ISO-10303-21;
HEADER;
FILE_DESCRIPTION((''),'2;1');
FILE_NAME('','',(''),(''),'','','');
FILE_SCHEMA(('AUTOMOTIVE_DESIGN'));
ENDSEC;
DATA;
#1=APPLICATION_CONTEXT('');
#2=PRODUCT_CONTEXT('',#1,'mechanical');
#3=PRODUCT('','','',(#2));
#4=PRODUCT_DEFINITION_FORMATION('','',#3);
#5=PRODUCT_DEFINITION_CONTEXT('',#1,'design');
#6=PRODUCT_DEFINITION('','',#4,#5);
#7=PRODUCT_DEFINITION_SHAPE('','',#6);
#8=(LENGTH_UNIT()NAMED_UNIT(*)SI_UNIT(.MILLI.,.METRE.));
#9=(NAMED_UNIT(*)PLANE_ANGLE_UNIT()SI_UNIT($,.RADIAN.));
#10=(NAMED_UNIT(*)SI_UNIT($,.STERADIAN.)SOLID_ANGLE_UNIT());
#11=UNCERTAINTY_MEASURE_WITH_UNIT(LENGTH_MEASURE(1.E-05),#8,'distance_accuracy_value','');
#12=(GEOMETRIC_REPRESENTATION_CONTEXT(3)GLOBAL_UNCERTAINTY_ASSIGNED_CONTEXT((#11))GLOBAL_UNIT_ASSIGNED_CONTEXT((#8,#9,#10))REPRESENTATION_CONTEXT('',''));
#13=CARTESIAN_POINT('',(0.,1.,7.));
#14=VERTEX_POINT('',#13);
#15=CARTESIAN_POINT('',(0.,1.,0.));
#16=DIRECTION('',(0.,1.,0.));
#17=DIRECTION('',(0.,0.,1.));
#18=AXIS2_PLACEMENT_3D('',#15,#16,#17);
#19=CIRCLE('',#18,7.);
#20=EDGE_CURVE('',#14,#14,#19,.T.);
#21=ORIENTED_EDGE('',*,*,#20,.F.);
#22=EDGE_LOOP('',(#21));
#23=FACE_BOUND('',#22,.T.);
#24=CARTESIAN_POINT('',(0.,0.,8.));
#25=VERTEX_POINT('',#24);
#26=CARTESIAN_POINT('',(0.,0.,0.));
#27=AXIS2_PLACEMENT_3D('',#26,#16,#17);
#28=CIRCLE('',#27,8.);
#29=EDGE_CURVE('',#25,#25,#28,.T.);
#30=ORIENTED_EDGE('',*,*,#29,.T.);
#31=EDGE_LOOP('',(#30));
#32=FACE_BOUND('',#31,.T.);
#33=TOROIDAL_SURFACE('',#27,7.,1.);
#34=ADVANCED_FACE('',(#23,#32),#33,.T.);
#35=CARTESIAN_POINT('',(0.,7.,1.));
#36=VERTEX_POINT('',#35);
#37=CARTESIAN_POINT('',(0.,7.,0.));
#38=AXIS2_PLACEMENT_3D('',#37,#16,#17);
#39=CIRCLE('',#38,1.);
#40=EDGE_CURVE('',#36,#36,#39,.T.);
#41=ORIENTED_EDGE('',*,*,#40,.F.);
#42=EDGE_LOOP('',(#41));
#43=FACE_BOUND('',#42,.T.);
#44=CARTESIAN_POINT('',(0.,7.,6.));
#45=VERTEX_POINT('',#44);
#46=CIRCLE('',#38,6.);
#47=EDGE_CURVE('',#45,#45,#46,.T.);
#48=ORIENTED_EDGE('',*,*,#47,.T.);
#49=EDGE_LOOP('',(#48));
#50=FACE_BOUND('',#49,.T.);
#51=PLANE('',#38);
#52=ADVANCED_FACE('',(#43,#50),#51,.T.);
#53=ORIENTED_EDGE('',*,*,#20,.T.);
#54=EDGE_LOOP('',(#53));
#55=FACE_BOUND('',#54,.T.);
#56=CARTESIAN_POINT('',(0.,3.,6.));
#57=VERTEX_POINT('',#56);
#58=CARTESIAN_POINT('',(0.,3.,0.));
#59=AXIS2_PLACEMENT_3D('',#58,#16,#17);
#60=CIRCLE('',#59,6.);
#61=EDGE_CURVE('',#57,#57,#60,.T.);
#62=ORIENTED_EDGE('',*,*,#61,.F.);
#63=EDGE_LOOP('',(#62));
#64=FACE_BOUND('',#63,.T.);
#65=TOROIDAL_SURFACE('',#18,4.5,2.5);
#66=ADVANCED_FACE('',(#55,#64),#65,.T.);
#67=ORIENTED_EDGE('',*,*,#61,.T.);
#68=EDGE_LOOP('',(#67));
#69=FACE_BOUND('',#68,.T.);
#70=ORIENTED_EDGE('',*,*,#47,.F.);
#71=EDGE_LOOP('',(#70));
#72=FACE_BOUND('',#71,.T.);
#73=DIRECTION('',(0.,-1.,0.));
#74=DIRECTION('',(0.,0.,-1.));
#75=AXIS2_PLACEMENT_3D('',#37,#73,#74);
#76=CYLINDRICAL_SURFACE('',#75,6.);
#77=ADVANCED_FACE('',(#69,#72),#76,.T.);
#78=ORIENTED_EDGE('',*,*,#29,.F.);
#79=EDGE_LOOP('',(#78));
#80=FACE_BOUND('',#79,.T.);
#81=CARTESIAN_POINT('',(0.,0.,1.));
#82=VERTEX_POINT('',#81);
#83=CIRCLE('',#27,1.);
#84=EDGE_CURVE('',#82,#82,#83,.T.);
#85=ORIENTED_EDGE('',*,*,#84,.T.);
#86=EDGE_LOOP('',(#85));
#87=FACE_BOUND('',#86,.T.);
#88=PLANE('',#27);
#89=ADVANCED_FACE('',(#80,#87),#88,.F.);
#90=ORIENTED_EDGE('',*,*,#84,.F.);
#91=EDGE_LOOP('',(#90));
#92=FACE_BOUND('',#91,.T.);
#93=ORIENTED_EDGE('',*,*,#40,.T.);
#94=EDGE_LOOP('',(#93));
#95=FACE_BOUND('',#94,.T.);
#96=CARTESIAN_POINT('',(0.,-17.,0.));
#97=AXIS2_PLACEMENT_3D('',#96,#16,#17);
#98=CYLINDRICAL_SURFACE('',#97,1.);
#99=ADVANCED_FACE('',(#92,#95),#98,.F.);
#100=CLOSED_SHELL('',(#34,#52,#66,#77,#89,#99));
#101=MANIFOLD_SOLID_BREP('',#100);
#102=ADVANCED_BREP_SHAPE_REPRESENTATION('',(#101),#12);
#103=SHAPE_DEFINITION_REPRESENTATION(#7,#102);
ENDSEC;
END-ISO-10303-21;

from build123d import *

# Parameters (mm, degrees)
SKETCH1_R                         = 8
BLADE_HOLDER_EXTRUDE_DEPTH        = 1
SKETCH2_R                         = 7
BLADE_HOLDER_EXTRUDE_2_DEPTH      = 2
SKETCH3_R                         = 6
BLADE_HOLDER_EXTRUDE_3_DEPTH      = 4
SKETCH4_R                         = 1
HOLE_FOR_SCREW_BLADE_HOLDER_DEPTH = 24
BLADE_HOLDER_FILLET_1_R           = 1
BLADE_HOLDER_FILLET_2_R           = 2.5


# Some blends are built 0.0001 mm under size
with BuildPart() as part:
    # Sketch1 → Blade Holder Extrude (new body)
    with BuildSketch(Plane(origin=(0, 0, 0), x_dir=(1, 0, 0), z_dir=(0, 1, 0))):
        with Locations(Location((0, 0, 0), (0, 0, 270))):
            Circle(SKETCH1_R)
    extrude(amount=BLADE_HOLDER_EXTRUDE_DEPTH)

    # Sketch2 → Blade Holder Extrude 2 (add)
    with BuildSketch(Plane(origin=(0, 1, 0), x_dir=(1, 0, 0), z_dir=(0, 1, 0))):
        with Locations(Location((0, 0, 0), (0, 0, 270))):
            Circle(SKETCH2_R)
    extrude(amount=BLADE_HOLDER_EXTRUDE_2_DEPTH)

    # Sketch3 → Blade Holder Extrude 3 (add)
    with BuildSketch(Plane(origin=(0, 3, 0), x_dir=(1, 0, 0), z_dir=(0, 1, 0))):
        with Locations(Location((0, 0, 0), (0, 0, 270))):
            Circle(SKETCH3_R)
    extrude(amount=BLADE_HOLDER_EXTRUDE_3_DEPTH)

    # Sketch4 → Hole for Screw (Blade Holder) (cut)
    with BuildSketch(Plane(origin=(0, 7, 0), x_dir=(1, 0, 0), z_dir=(0, 1, 0))):
        with Locations(Location((0, 0, 0), (0, 0, 270))):
            Circle(SKETCH4_R)
    extrude(amount=-HOLE_FOR_SCREW_BLADE_HOLDER_DEPTH, mode=Mode.SUBTRACT)

    # Blade Holder Fillet 1
    blade_holder_fillet_1_edges = [part.edges().sort_by_distance(p)[0] for p in [
        (0, 1, -8),
    ]]
    fillet(blade_holder_fillet_1_edges, radius=BLADE_HOLDER_FILLET_1_R - 0.0001)  # a hair under: the kernel refuses the full size

    # Blade Holder Fillet 2
    # the kernel refuses this fillet: 2.5 mm, written as the material it takes off along each edge
    with BuildSketch(Plane(origin=(0, 3, 0), x_dir=(0, 0, 1), z_dir=(-1, 0, 0))) as blade_holder_fillet_2_piece_1:
        with BuildLine():
            CenterArc((4.5, -2), BLADE_HOLDER_FILLET_2_R, 0, 53.130102354)
            Line((6, 0), (7, 0))
            Line((7, 0), (7, -2))
        make_face()
    revolve(axis=Axis((0, 3, 0), (0, 1, 0)), mode=Mode.SUBTRACT)


solid = part.part
